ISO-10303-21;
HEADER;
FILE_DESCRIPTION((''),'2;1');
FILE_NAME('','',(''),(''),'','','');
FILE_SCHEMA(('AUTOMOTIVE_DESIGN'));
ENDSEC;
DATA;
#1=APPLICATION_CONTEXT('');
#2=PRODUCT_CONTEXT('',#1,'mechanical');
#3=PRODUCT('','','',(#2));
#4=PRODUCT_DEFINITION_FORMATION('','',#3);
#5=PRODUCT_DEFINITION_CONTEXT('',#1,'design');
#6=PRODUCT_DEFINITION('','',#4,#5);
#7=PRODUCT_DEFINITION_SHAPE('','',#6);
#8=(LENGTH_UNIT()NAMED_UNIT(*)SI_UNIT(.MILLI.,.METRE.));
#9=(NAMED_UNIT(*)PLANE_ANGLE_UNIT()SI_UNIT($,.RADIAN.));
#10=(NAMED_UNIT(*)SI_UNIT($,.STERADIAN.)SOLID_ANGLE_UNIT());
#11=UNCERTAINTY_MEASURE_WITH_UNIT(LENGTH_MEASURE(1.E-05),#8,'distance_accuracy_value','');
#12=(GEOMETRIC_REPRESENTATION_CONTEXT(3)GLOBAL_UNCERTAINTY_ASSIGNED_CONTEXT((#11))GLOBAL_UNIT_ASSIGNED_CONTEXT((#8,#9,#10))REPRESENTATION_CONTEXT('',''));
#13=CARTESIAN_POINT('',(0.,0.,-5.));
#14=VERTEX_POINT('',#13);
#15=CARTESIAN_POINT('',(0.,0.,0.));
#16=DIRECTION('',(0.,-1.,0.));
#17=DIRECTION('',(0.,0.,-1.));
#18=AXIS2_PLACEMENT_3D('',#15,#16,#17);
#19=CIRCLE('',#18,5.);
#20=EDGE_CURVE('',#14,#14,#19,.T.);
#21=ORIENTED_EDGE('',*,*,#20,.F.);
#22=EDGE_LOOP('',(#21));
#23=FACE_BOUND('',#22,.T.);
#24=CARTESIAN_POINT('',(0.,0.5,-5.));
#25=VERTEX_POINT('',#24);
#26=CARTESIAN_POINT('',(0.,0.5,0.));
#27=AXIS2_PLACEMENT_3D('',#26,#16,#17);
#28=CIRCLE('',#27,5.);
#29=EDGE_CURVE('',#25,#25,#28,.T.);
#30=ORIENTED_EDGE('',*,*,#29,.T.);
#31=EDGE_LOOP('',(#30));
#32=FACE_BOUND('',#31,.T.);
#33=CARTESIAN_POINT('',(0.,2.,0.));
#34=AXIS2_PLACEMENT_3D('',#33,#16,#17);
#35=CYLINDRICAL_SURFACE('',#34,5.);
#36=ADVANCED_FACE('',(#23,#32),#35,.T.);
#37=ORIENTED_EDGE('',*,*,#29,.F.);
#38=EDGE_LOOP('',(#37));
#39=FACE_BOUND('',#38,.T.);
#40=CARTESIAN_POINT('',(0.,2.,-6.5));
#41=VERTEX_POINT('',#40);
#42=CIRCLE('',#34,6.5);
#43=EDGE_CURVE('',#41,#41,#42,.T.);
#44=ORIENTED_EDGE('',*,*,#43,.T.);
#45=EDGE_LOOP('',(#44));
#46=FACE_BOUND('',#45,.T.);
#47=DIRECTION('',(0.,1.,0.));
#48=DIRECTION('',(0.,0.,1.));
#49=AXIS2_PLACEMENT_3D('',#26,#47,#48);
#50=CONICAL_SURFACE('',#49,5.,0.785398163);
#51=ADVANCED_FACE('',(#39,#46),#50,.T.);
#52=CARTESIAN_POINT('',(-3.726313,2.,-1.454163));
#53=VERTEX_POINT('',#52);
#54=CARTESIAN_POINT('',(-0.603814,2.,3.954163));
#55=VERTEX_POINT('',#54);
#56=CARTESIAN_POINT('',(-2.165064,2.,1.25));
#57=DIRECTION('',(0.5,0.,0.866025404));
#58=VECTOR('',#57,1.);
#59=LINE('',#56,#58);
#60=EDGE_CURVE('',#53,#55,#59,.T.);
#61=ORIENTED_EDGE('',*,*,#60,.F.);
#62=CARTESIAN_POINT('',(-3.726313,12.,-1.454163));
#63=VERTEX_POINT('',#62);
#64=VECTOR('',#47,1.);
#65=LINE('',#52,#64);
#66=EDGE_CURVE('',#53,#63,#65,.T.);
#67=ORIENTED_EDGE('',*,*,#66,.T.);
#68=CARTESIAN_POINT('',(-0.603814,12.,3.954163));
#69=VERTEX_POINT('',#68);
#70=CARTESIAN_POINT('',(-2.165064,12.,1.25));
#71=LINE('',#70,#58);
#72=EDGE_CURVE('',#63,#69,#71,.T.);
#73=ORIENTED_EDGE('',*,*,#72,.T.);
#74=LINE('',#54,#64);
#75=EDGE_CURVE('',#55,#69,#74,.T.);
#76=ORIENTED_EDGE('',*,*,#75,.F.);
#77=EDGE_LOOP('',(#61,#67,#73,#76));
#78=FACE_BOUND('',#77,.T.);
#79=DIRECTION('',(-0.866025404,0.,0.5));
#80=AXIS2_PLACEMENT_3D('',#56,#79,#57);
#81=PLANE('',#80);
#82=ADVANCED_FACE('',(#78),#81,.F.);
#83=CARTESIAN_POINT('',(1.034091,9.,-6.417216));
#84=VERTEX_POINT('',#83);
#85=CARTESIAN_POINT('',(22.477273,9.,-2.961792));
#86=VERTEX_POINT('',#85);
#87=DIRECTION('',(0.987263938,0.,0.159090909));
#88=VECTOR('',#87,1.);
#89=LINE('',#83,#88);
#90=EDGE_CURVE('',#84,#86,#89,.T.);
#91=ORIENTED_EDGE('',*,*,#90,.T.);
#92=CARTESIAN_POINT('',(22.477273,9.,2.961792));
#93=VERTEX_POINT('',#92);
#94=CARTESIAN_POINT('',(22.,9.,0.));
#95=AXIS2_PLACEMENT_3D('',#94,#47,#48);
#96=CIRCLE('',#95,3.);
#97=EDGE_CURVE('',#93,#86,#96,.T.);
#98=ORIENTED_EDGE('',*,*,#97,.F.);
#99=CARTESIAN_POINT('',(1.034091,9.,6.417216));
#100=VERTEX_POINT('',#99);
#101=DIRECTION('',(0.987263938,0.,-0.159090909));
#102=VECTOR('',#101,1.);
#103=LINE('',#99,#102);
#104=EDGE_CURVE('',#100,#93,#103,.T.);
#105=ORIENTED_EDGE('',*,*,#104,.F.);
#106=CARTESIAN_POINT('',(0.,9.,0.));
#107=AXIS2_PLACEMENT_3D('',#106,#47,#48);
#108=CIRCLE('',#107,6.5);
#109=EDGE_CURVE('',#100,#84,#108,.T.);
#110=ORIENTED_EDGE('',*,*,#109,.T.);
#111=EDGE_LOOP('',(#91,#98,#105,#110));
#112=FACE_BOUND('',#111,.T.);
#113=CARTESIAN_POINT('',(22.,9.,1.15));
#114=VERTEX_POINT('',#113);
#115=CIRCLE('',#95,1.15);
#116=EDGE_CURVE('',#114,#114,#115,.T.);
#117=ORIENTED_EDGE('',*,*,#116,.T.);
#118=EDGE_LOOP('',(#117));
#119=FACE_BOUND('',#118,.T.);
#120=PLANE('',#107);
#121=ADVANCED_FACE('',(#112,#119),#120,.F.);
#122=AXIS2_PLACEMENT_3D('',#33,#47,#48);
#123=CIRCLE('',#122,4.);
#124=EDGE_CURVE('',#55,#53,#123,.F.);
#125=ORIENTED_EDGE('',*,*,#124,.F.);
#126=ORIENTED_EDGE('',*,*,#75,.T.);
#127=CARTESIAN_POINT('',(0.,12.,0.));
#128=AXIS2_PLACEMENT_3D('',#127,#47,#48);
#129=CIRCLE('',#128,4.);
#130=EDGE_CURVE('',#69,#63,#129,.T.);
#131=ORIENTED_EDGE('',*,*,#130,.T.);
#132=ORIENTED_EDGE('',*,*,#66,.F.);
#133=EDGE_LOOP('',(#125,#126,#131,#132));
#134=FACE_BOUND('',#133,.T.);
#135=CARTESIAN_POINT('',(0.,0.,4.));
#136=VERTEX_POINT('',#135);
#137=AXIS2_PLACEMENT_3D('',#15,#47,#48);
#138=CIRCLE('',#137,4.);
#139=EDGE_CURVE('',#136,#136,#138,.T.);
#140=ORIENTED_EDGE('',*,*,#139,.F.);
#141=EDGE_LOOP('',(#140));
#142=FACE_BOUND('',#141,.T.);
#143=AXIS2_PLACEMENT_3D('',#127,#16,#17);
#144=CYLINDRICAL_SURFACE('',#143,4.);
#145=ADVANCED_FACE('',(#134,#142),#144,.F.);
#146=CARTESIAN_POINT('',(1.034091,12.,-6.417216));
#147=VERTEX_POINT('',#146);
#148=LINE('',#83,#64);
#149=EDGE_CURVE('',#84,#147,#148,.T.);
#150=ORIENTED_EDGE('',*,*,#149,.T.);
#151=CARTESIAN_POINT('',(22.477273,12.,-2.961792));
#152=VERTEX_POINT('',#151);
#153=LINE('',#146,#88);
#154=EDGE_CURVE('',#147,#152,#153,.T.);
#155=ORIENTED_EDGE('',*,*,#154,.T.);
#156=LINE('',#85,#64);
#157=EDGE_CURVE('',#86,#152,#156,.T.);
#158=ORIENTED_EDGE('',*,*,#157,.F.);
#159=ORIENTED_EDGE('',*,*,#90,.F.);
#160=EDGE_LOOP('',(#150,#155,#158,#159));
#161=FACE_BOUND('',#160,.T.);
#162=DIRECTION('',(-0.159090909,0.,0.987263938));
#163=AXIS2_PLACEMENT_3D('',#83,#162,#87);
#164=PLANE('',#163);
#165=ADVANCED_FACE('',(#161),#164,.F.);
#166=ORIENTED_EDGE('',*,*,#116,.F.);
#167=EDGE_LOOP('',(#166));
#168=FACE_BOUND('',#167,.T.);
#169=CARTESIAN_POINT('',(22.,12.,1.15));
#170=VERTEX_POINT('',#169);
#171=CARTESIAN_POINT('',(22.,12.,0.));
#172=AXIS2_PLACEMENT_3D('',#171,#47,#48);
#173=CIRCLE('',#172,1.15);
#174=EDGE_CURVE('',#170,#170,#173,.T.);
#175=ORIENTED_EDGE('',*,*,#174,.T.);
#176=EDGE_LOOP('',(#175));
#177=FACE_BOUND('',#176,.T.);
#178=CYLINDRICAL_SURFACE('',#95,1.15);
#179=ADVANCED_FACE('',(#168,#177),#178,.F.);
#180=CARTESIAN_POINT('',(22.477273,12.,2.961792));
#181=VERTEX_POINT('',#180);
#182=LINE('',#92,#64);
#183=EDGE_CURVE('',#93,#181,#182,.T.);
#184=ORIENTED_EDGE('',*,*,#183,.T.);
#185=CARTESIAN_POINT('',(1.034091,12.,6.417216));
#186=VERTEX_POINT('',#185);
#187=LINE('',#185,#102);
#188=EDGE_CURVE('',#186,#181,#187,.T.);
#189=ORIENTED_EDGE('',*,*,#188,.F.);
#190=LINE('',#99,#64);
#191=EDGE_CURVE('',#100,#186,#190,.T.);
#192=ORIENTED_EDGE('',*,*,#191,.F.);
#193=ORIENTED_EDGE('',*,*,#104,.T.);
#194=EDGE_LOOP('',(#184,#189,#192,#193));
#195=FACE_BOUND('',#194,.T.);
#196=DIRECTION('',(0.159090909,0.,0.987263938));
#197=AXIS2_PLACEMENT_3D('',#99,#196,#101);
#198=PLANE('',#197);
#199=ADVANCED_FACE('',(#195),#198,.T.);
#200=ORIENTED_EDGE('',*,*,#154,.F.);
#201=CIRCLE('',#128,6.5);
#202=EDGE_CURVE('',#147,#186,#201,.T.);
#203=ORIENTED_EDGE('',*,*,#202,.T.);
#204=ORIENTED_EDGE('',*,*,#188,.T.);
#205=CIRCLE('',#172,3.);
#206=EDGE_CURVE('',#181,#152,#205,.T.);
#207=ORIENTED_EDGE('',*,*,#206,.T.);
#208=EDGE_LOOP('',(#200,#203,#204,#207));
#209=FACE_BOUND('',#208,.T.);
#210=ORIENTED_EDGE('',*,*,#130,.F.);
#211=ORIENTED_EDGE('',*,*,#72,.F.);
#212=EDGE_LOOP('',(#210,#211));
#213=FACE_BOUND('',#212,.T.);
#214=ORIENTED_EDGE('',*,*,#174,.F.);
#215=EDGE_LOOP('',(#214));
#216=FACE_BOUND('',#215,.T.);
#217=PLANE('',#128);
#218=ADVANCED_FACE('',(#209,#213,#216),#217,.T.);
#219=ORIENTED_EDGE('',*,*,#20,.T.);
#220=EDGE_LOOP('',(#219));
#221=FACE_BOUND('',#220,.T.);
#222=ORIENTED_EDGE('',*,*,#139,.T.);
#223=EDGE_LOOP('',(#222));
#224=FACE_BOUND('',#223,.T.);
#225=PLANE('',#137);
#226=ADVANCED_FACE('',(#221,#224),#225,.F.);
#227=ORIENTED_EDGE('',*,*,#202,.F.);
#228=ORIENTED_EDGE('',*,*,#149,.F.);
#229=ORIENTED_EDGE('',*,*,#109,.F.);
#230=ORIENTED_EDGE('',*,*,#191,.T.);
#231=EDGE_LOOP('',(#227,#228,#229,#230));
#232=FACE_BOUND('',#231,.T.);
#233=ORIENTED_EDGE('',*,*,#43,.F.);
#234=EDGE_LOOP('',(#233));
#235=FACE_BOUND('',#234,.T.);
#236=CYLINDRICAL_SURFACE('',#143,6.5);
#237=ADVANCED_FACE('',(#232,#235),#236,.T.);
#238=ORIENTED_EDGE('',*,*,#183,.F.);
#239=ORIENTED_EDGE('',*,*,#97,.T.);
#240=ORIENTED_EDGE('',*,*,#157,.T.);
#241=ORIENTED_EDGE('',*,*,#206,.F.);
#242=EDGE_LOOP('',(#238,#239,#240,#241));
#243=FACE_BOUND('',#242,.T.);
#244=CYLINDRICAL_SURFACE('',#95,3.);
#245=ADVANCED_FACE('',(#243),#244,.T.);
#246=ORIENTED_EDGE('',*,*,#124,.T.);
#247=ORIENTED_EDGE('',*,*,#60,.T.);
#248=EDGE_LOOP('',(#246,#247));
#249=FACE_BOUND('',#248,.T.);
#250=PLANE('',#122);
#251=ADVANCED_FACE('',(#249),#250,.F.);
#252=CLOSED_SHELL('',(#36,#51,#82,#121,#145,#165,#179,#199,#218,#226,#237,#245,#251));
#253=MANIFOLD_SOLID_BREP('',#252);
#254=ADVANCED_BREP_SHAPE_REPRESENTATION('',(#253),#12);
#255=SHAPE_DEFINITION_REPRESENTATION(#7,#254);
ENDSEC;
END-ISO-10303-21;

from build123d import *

# Parameters (mm, degrees)
SKETCH1_R           = 6.5
SKETCH1_R_2         = 4
BOSS_EXTRUDE1_DEPTH = 12
BOSS_EXTRUDE2_START = -3
SKETCH2_R           = 1.15
BOSS_EXTRUDE2_DEPTH = 3
SKETCH4_R           = 6.5
SKETCH4_R_2         = 5
CUT_EXTRUDE1_DEPTH  = 2
BOSS_EXTRUDE4_START = -10
BOSS_EXTRUDE4_DEPTH = 10
CHAMFER1_SIZE       = 1.5


with BuildPart() as part:
    # Sketch1 → Boss-Extrude1 (new body)
    with BuildSketch(Plane(origin=(0, 0, 0), x_dir=(1, 0, 0), z_dir=(0, 1, 0))):
        with Locations(Location((0, 0, 0), (0, 0, 270))):
            Circle(SKETCH1_R)
        with Locations(Location((0, 0, 0), (0, 0, 270))):
            Circle(SKETCH1_R_2, mode=Mode.SUBTRACT)
    extrude(amount=BOSS_EXTRUDE1_DEPTH)

    # Sketch2 → Boss-Extrude2 (add)
    with BuildSketch(Plane(origin=(0, 12, 0), x_dir=(1, 0, 0), z_dir=(0, 1, 0)).offset(BOSS_EXTRUDE2_START)):
        with BuildLine():
            Line((22.477272727, 2.961791813), (1.034090909, 6.417215595))
            ThreePointArc((1.034090909, 6.417215595), (4.948312384, 4.214760319), (6.5, 0))
            ThreePointArc((6.5, 0), (4.948312384, -4.214760319), (1.034090909, -6.417215595))
            Line((1.034090909, -6.417215595), (22.477272727, -2.961791813))
            ThreePointArc((22.477272727, -2.961791813), (25, 0), (22.477272727, 2.961791813))
        make_face()
        with Locations(Location((22, 0, 0), (0, 0, 270))):
            Circle(SKETCH2_R, mode=Mode.SUBTRACT)
    extrude(amount=BOSS_EXTRUDE2_DEPTH)

    # Sketch4 → Cut-Extrude1 (cut)
    with BuildSketch(Plane.XZ):
        with Locations(Location((0, 0, 0), (0, 0, 270))):
            Circle(SKETCH4_R)
        with Locations(Location((0, 0, 0), (0, 0, 270))):
            Circle(SKETCH4_R_2, mode=Mode.SUBTRACT)
    extrude(amount=-CUT_EXTRUDE1_DEPTH, mode=Mode.SUBTRACT)

    # Sketch5 → Boss-Extrude4 (add)
    with BuildSketch(Plane(origin=(0, 12, 0), x_dir=(1, 0, 0), z_dir=(0, 1, 0)).offset(BOSS_EXTRUDE4_START)):
        with BuildLine():
            Line((-0.60381401, -3.954163457), (-3.726313009, 1.454163457))
            ThreePointArc((-3.726313009, 1.454163457), (-3.464101615, -2), (-0.60381401, -3.954163457))
        make_face()
    extrude(amount=BOSS_EXTRUDE4_DEPTH)

    # Chamfer1
    chamfer1_edges = [part.edges().sort_by_distance(p)[0] for p in [
        (0, 2, 5),
    ]]
    chamfer(chamfer1_edges, length=CHAMFER1_SIZE - 0.0001)  # a hair under: the kernel refuses the full size


solid = part.part
